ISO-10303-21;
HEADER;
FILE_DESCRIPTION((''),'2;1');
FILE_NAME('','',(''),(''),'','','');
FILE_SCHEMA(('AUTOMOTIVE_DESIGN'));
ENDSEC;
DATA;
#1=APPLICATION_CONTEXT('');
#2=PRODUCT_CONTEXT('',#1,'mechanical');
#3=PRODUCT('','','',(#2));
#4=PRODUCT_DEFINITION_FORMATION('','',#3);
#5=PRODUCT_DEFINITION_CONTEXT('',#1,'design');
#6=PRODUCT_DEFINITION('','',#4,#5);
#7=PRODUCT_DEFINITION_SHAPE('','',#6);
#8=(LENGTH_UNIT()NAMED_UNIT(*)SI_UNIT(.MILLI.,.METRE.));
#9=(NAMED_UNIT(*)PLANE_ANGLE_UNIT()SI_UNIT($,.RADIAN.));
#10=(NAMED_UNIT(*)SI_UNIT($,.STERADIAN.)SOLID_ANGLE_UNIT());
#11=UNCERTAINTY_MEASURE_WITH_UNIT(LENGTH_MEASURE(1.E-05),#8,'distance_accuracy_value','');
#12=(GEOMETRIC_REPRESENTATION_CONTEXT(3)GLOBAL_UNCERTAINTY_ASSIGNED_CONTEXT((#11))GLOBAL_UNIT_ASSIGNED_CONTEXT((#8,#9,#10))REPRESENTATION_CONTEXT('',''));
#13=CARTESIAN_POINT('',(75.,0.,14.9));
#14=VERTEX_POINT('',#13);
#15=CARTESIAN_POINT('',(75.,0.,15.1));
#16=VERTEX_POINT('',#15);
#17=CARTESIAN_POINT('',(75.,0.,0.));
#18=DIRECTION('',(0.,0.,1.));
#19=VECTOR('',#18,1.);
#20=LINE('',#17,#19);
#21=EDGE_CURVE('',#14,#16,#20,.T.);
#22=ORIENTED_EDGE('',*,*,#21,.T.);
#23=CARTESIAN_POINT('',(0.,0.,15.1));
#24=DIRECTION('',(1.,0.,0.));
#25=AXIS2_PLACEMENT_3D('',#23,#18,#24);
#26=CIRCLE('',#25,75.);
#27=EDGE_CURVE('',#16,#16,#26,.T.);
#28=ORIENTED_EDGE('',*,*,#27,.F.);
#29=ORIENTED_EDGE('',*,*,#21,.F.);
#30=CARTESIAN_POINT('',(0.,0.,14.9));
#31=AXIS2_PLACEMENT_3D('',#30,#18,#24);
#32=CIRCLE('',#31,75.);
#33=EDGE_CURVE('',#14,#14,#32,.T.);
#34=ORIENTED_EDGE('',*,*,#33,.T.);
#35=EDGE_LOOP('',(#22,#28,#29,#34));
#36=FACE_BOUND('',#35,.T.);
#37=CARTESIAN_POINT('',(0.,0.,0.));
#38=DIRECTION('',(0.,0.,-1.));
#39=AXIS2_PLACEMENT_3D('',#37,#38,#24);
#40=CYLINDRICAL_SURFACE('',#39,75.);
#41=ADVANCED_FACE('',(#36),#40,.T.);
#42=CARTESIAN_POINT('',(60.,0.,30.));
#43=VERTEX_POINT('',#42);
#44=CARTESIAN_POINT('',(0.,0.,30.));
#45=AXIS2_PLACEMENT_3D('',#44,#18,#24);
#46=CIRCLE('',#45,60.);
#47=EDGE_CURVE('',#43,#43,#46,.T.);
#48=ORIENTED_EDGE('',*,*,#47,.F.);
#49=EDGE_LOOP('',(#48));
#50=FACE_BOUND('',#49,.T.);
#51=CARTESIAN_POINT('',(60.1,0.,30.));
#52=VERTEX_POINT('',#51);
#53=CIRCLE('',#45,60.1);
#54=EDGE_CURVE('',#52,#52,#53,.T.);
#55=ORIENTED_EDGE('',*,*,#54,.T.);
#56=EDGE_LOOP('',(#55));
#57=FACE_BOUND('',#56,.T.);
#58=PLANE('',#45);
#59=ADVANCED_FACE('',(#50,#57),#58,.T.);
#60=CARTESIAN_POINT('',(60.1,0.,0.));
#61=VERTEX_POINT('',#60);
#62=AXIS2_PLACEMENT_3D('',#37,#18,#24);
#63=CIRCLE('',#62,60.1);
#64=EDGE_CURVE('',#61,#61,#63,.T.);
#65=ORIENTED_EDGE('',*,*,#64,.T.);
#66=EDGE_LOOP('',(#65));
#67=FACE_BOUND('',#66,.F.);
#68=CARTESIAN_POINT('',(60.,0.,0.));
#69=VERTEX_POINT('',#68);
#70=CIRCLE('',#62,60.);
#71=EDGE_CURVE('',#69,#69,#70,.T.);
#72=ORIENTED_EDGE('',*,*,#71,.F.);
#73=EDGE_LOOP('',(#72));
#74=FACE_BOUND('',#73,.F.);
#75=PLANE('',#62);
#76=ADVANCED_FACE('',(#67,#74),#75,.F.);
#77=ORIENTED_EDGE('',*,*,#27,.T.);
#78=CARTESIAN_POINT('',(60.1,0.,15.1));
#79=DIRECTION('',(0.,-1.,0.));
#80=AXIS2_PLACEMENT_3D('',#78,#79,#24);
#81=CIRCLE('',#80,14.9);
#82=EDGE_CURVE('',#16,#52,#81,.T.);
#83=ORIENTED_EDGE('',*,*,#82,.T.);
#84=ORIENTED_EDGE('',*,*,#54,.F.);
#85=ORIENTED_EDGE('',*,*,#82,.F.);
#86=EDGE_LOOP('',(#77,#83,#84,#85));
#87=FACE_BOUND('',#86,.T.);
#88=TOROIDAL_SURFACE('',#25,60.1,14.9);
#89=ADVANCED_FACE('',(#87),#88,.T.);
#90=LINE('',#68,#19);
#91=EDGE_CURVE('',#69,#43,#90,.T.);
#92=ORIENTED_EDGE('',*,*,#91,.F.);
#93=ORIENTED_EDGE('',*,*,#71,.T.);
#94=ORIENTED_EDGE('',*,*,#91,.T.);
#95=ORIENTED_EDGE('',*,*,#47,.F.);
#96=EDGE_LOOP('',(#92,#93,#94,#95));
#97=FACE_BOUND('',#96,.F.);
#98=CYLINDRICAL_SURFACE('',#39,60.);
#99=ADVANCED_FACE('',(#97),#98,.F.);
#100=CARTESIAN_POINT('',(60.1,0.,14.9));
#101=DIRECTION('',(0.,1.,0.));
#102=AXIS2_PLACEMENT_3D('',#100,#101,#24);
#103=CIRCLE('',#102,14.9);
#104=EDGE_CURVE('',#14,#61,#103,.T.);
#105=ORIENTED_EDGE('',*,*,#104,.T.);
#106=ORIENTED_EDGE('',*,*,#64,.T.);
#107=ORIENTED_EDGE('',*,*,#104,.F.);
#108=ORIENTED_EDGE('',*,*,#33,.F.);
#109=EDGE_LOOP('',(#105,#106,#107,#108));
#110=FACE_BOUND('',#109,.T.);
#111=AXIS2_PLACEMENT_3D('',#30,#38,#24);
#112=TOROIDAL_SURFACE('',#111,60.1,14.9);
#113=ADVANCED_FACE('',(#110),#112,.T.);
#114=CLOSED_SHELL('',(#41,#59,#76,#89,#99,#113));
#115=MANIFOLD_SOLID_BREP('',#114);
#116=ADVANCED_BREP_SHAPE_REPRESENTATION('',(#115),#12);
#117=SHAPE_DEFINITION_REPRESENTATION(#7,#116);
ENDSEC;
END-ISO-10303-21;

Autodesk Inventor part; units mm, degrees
ref_plane "YZ Plane" through (0, 0, 0) normal (1, 0, 0) x (0, 1, 0)
ref_plane "XZ Plane" through (0, 0, 0) normal (0, 1, 0) x (-1, 0, 0)
ref_plane "XY Plane" through (0, 0, 0) normal (0, 0, 1) x (1, 0, 0)
sketch "스케치1" plane through (0, 0, 0) normal (0, 0, 1) x (1, 0, 0)
  circle A0 centre (0, 0) radius 60
  circle A1 centre (0, 0) radius 75
  dimension "d0" = 120
  dimension "d1" = 150
extrude "돌출1" add sketch "스케치1" along normal blind 30
fillet "모깎기1" radius 14.9 2 edges at (-75, 0, 30) (-75, 0, 0)
properties part number "tire" material "고무, 실리콘"
